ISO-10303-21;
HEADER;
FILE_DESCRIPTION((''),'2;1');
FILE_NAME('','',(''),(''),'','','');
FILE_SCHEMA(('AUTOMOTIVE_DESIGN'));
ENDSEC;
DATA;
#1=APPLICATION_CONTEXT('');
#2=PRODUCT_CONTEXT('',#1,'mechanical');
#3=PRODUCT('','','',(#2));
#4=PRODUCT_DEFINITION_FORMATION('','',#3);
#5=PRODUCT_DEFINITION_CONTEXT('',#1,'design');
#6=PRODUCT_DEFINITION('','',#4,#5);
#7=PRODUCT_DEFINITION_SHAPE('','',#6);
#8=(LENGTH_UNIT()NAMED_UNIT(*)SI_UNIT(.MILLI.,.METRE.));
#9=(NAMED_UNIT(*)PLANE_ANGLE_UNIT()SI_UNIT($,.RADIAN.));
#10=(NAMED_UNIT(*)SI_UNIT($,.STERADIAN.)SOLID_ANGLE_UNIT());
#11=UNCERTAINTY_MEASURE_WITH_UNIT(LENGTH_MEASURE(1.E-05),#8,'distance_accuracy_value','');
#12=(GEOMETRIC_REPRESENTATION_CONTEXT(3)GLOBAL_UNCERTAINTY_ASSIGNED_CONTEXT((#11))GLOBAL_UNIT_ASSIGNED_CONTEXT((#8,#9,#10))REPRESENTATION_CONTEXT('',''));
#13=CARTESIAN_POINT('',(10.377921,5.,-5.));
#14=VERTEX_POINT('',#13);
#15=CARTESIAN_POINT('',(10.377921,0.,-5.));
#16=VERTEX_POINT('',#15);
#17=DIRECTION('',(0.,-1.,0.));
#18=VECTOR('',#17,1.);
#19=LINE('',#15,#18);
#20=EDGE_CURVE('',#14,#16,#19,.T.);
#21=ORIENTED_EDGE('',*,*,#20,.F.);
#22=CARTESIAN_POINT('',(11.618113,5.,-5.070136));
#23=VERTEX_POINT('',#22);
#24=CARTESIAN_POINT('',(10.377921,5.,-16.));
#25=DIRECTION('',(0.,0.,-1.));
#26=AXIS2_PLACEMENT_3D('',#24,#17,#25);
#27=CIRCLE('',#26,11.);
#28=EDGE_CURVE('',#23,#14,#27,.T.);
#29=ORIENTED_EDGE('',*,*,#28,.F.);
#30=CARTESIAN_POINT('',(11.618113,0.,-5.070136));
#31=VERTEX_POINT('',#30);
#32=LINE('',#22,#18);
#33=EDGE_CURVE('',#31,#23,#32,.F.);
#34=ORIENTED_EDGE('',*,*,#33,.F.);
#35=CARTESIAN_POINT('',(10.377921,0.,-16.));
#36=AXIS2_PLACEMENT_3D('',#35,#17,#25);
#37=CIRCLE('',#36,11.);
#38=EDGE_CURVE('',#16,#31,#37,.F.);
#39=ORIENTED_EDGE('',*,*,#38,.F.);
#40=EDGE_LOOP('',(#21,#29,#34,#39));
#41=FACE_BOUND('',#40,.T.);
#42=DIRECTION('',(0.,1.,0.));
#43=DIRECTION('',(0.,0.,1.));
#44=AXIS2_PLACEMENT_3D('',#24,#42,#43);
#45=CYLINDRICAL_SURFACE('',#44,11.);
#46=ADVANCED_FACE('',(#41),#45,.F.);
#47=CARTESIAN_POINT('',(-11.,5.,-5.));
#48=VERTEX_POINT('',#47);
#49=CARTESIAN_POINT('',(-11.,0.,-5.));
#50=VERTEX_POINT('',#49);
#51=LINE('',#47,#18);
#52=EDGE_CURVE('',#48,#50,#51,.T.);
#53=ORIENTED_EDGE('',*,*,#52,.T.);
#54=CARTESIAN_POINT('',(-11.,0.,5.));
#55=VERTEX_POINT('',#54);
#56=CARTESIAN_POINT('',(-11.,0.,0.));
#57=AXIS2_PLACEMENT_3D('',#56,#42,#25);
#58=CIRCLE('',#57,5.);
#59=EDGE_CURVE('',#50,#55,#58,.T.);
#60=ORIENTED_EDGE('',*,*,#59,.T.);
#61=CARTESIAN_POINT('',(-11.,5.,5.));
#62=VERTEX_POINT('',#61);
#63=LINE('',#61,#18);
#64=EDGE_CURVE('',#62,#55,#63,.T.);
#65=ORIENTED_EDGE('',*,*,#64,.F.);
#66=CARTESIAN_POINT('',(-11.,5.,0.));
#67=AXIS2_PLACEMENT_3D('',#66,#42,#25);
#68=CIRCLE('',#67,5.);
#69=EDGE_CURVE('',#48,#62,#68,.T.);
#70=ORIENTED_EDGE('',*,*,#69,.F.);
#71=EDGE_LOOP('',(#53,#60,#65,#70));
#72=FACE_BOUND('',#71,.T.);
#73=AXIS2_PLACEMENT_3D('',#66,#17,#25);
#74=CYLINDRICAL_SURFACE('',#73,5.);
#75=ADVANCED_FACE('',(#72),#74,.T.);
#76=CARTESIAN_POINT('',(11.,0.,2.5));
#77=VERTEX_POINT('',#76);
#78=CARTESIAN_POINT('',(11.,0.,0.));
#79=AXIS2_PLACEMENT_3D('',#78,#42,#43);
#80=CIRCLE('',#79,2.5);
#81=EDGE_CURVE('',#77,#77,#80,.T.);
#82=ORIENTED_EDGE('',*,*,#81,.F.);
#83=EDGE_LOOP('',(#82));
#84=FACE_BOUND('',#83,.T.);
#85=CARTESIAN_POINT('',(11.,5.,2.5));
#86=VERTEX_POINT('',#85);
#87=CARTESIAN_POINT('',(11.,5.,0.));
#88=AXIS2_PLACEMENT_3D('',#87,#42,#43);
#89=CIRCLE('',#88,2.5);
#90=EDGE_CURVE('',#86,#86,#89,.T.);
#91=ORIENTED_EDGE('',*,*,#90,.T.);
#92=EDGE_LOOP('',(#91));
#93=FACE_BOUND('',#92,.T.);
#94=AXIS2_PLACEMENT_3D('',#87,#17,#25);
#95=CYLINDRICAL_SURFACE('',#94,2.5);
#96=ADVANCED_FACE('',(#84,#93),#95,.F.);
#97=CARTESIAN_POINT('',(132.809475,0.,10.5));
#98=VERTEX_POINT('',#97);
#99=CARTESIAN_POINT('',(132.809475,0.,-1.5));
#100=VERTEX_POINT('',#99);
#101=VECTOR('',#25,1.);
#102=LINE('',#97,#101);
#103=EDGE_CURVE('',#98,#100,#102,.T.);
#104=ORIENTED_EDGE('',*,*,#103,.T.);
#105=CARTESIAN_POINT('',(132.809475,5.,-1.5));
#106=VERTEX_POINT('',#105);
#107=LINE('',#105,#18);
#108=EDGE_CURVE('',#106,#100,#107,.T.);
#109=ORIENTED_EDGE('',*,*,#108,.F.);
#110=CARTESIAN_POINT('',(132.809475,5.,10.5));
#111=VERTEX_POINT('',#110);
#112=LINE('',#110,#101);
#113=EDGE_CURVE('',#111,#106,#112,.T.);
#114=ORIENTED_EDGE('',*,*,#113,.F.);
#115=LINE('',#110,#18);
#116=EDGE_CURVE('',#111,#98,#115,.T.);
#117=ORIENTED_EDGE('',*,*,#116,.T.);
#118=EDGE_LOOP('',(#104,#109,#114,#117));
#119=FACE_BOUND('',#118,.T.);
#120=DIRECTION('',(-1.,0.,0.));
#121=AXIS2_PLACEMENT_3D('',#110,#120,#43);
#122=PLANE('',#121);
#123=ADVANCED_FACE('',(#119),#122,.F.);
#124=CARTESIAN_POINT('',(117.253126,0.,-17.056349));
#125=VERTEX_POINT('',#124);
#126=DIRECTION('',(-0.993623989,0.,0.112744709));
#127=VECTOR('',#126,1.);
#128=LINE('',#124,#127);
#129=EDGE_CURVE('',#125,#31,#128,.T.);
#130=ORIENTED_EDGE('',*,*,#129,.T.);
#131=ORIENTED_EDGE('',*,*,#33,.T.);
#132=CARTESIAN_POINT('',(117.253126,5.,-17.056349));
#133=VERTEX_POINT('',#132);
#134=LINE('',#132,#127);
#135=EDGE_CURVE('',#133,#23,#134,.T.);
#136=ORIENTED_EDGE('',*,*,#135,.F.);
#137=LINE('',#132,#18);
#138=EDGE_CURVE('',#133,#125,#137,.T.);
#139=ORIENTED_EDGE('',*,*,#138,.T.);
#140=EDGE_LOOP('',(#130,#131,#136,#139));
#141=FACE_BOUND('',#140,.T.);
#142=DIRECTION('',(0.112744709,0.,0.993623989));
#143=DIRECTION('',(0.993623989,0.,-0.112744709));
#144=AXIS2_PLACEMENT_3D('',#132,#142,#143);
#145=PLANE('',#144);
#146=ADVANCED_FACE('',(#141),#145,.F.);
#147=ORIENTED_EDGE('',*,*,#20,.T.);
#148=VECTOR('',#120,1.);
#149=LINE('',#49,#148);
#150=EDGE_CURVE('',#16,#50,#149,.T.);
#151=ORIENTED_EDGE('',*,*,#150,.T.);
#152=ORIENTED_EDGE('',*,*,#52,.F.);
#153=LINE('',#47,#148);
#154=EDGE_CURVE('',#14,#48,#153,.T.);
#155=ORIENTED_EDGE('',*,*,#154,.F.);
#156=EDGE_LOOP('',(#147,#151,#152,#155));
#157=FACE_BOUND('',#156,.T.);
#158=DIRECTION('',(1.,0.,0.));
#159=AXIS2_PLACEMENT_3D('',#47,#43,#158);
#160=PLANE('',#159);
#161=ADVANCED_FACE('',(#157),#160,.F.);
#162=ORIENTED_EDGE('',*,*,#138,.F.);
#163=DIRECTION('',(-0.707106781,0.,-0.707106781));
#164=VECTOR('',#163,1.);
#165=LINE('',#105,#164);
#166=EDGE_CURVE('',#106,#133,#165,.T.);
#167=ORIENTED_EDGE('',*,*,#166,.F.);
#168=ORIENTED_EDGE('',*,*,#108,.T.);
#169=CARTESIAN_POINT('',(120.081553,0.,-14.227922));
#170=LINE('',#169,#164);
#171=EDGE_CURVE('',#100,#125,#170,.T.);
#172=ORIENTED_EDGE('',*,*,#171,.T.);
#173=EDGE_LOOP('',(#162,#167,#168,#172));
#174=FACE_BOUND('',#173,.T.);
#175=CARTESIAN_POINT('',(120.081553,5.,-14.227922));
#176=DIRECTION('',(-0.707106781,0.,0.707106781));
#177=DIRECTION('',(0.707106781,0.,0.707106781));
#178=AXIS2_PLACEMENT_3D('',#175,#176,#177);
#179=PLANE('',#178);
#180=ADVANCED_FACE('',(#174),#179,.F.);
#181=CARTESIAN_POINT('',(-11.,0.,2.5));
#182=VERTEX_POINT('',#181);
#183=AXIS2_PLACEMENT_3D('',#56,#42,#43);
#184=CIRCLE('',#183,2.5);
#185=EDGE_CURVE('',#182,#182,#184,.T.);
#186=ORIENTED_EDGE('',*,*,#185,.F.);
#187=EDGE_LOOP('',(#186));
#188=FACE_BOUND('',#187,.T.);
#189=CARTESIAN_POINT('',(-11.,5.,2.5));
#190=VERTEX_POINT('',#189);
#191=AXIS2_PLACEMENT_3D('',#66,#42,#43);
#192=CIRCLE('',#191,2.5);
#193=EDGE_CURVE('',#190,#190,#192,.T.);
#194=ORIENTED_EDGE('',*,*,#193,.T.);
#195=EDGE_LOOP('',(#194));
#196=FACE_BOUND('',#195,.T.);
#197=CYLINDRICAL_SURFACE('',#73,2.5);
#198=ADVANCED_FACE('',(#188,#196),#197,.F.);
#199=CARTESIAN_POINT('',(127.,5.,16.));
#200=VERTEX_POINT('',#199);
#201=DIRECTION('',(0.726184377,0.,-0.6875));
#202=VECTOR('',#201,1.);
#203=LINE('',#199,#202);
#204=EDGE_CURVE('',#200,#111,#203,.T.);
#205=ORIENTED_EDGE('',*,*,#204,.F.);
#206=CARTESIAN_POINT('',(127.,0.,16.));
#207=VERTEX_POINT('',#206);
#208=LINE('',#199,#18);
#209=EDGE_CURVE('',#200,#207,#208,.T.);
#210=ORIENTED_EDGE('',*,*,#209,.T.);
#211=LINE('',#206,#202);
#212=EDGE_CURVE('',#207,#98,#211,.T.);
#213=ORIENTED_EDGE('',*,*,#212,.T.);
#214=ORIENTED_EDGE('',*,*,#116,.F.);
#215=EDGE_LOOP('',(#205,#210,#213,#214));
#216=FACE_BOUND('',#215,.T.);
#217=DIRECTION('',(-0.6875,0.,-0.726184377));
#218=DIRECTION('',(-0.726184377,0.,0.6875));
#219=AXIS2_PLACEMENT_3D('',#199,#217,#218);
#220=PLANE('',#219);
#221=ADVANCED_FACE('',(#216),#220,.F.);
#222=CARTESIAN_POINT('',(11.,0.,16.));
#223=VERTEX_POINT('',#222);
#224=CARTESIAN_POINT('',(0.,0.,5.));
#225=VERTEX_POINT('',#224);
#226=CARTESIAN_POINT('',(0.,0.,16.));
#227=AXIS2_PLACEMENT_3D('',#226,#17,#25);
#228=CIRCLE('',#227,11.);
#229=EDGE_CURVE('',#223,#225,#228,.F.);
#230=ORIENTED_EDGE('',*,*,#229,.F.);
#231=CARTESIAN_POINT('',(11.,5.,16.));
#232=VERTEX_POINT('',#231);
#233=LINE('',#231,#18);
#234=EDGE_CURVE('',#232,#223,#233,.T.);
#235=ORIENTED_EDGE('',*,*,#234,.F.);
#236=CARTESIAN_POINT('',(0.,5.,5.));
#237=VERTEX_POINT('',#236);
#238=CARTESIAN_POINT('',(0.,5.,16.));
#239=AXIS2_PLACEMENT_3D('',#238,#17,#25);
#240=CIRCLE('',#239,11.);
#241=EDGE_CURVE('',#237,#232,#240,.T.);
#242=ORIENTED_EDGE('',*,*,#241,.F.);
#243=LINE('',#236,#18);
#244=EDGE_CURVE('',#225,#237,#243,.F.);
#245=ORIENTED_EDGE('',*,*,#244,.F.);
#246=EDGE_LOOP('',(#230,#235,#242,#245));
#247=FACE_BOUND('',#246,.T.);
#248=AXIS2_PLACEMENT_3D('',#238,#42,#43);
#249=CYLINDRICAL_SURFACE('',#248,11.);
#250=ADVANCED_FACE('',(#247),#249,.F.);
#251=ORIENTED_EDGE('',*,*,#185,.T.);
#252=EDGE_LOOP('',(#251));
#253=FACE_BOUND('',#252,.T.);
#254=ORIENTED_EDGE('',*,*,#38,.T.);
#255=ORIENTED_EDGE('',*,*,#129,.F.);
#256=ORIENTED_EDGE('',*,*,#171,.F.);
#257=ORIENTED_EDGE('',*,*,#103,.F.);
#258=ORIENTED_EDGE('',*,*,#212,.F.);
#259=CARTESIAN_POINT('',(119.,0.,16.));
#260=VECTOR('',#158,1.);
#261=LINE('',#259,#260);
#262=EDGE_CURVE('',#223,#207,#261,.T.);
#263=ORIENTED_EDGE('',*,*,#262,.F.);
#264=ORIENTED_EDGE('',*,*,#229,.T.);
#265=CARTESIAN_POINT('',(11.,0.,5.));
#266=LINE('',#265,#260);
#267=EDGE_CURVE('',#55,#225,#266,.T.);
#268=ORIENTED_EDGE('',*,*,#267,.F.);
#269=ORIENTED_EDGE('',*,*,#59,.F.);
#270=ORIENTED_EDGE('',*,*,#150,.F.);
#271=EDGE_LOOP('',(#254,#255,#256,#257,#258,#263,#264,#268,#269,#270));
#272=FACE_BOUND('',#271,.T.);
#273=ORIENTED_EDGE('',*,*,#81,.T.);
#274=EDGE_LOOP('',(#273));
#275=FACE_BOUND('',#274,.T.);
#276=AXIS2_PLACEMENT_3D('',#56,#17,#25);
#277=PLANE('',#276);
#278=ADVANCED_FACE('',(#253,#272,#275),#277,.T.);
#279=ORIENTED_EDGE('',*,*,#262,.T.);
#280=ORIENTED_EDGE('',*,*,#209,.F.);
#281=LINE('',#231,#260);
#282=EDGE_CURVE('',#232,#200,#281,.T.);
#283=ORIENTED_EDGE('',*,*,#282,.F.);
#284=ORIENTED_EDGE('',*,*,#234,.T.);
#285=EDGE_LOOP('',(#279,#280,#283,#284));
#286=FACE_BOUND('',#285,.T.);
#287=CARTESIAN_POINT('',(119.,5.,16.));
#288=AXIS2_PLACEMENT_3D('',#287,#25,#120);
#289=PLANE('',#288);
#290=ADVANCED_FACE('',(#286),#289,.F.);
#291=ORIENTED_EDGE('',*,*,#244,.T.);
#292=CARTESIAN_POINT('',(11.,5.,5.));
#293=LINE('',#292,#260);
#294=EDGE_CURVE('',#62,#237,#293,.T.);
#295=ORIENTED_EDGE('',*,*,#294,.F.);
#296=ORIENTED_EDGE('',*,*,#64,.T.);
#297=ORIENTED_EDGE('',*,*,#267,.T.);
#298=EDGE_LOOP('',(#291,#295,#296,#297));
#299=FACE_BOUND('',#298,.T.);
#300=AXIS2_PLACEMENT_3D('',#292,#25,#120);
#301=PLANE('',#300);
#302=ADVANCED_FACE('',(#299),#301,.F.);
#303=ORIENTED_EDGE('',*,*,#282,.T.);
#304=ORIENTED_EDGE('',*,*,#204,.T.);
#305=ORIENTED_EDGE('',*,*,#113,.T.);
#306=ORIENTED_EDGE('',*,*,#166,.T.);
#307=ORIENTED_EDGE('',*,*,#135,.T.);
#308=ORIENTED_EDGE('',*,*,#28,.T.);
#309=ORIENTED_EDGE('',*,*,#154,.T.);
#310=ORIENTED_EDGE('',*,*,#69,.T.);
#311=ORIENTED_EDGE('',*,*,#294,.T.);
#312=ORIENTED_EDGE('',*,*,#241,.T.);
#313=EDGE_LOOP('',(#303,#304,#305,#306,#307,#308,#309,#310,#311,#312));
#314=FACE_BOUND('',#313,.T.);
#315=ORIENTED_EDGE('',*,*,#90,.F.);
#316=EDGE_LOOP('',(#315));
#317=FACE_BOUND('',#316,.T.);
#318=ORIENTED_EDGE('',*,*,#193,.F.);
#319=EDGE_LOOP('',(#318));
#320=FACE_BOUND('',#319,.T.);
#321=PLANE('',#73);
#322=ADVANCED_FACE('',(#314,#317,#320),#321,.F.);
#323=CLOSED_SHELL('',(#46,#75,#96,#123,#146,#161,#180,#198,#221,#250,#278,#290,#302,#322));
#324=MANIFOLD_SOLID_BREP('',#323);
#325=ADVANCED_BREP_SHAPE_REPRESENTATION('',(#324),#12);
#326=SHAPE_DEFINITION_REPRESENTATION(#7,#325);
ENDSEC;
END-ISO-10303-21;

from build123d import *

# Parameters (mm, degrees)
SKETCH_1_R      = 2.5
EXTRUDE_1_DEPTH = 5
FILLET_2_R      = 11
FILLET_3_R      = 11


with BuildPart() as part:
    # 草图1 → 凸台-拉伸1 (new body)
    with BuildSketch(Plane(origin=(0, 0, 0), x_dir=(1, 0, 0), z_dir=(0, 1, 0))):
        with BuildLine():
            Line((11, -5), (-11, -5))
            ThreePointArc((-11, -5), (-16, 0), (-11, 5))
            Line((-11, 5), (11, 5))
            Line((11, 5), (117.253125833, 17.056349186))
            Line((117.253125833, 17.056349186), (120.081552958, 14.227922061))
            Line((120.081552958, 14.227922061), (132.809475019, 1.5))
            Line((132.809475019, 1.5), (132.809475019, -10.5))
            Line((132.809475019, -10.5), (127, -16))
            Line((127, -16), (119, -16))
            Line((119, -16), (19, -16))
            Line((19, -16), (11, -16))
            Line((11, -16), (11, -5))
        make_face()
        with Locations(Location((-11, 0, 0), (0, 0, 270))):
            Circle(SKETCH_1_R, mode=Mode.SUBTRACT)
        with Locations(Location((11, 0, 0), (0, 0, 270))):
            Circle(SKETCH_1_R, mode=Mode.SUBTRACT)
    extrude(amount=EXTRUDE_1_DEPTH)

    # 圆角2
    fillet_2_edges = [part.edges().sort_by_distance(p)[0] for p in [
        (11, 2.5, 5),
    ]]
    fillet(fillet_2_edges, radius=FILLET_2_R - 0.0001)  # a hair under: the kernel refuses the full size

    # 圆角3
    fillet_3_edges = [part.edges().sort_by_distance(p)[0] for p in [
        (11, 2.5, -5),
    ]]
    fillet(fillet_3_edges, radius=FILLET_3_R)


solid = part.part
